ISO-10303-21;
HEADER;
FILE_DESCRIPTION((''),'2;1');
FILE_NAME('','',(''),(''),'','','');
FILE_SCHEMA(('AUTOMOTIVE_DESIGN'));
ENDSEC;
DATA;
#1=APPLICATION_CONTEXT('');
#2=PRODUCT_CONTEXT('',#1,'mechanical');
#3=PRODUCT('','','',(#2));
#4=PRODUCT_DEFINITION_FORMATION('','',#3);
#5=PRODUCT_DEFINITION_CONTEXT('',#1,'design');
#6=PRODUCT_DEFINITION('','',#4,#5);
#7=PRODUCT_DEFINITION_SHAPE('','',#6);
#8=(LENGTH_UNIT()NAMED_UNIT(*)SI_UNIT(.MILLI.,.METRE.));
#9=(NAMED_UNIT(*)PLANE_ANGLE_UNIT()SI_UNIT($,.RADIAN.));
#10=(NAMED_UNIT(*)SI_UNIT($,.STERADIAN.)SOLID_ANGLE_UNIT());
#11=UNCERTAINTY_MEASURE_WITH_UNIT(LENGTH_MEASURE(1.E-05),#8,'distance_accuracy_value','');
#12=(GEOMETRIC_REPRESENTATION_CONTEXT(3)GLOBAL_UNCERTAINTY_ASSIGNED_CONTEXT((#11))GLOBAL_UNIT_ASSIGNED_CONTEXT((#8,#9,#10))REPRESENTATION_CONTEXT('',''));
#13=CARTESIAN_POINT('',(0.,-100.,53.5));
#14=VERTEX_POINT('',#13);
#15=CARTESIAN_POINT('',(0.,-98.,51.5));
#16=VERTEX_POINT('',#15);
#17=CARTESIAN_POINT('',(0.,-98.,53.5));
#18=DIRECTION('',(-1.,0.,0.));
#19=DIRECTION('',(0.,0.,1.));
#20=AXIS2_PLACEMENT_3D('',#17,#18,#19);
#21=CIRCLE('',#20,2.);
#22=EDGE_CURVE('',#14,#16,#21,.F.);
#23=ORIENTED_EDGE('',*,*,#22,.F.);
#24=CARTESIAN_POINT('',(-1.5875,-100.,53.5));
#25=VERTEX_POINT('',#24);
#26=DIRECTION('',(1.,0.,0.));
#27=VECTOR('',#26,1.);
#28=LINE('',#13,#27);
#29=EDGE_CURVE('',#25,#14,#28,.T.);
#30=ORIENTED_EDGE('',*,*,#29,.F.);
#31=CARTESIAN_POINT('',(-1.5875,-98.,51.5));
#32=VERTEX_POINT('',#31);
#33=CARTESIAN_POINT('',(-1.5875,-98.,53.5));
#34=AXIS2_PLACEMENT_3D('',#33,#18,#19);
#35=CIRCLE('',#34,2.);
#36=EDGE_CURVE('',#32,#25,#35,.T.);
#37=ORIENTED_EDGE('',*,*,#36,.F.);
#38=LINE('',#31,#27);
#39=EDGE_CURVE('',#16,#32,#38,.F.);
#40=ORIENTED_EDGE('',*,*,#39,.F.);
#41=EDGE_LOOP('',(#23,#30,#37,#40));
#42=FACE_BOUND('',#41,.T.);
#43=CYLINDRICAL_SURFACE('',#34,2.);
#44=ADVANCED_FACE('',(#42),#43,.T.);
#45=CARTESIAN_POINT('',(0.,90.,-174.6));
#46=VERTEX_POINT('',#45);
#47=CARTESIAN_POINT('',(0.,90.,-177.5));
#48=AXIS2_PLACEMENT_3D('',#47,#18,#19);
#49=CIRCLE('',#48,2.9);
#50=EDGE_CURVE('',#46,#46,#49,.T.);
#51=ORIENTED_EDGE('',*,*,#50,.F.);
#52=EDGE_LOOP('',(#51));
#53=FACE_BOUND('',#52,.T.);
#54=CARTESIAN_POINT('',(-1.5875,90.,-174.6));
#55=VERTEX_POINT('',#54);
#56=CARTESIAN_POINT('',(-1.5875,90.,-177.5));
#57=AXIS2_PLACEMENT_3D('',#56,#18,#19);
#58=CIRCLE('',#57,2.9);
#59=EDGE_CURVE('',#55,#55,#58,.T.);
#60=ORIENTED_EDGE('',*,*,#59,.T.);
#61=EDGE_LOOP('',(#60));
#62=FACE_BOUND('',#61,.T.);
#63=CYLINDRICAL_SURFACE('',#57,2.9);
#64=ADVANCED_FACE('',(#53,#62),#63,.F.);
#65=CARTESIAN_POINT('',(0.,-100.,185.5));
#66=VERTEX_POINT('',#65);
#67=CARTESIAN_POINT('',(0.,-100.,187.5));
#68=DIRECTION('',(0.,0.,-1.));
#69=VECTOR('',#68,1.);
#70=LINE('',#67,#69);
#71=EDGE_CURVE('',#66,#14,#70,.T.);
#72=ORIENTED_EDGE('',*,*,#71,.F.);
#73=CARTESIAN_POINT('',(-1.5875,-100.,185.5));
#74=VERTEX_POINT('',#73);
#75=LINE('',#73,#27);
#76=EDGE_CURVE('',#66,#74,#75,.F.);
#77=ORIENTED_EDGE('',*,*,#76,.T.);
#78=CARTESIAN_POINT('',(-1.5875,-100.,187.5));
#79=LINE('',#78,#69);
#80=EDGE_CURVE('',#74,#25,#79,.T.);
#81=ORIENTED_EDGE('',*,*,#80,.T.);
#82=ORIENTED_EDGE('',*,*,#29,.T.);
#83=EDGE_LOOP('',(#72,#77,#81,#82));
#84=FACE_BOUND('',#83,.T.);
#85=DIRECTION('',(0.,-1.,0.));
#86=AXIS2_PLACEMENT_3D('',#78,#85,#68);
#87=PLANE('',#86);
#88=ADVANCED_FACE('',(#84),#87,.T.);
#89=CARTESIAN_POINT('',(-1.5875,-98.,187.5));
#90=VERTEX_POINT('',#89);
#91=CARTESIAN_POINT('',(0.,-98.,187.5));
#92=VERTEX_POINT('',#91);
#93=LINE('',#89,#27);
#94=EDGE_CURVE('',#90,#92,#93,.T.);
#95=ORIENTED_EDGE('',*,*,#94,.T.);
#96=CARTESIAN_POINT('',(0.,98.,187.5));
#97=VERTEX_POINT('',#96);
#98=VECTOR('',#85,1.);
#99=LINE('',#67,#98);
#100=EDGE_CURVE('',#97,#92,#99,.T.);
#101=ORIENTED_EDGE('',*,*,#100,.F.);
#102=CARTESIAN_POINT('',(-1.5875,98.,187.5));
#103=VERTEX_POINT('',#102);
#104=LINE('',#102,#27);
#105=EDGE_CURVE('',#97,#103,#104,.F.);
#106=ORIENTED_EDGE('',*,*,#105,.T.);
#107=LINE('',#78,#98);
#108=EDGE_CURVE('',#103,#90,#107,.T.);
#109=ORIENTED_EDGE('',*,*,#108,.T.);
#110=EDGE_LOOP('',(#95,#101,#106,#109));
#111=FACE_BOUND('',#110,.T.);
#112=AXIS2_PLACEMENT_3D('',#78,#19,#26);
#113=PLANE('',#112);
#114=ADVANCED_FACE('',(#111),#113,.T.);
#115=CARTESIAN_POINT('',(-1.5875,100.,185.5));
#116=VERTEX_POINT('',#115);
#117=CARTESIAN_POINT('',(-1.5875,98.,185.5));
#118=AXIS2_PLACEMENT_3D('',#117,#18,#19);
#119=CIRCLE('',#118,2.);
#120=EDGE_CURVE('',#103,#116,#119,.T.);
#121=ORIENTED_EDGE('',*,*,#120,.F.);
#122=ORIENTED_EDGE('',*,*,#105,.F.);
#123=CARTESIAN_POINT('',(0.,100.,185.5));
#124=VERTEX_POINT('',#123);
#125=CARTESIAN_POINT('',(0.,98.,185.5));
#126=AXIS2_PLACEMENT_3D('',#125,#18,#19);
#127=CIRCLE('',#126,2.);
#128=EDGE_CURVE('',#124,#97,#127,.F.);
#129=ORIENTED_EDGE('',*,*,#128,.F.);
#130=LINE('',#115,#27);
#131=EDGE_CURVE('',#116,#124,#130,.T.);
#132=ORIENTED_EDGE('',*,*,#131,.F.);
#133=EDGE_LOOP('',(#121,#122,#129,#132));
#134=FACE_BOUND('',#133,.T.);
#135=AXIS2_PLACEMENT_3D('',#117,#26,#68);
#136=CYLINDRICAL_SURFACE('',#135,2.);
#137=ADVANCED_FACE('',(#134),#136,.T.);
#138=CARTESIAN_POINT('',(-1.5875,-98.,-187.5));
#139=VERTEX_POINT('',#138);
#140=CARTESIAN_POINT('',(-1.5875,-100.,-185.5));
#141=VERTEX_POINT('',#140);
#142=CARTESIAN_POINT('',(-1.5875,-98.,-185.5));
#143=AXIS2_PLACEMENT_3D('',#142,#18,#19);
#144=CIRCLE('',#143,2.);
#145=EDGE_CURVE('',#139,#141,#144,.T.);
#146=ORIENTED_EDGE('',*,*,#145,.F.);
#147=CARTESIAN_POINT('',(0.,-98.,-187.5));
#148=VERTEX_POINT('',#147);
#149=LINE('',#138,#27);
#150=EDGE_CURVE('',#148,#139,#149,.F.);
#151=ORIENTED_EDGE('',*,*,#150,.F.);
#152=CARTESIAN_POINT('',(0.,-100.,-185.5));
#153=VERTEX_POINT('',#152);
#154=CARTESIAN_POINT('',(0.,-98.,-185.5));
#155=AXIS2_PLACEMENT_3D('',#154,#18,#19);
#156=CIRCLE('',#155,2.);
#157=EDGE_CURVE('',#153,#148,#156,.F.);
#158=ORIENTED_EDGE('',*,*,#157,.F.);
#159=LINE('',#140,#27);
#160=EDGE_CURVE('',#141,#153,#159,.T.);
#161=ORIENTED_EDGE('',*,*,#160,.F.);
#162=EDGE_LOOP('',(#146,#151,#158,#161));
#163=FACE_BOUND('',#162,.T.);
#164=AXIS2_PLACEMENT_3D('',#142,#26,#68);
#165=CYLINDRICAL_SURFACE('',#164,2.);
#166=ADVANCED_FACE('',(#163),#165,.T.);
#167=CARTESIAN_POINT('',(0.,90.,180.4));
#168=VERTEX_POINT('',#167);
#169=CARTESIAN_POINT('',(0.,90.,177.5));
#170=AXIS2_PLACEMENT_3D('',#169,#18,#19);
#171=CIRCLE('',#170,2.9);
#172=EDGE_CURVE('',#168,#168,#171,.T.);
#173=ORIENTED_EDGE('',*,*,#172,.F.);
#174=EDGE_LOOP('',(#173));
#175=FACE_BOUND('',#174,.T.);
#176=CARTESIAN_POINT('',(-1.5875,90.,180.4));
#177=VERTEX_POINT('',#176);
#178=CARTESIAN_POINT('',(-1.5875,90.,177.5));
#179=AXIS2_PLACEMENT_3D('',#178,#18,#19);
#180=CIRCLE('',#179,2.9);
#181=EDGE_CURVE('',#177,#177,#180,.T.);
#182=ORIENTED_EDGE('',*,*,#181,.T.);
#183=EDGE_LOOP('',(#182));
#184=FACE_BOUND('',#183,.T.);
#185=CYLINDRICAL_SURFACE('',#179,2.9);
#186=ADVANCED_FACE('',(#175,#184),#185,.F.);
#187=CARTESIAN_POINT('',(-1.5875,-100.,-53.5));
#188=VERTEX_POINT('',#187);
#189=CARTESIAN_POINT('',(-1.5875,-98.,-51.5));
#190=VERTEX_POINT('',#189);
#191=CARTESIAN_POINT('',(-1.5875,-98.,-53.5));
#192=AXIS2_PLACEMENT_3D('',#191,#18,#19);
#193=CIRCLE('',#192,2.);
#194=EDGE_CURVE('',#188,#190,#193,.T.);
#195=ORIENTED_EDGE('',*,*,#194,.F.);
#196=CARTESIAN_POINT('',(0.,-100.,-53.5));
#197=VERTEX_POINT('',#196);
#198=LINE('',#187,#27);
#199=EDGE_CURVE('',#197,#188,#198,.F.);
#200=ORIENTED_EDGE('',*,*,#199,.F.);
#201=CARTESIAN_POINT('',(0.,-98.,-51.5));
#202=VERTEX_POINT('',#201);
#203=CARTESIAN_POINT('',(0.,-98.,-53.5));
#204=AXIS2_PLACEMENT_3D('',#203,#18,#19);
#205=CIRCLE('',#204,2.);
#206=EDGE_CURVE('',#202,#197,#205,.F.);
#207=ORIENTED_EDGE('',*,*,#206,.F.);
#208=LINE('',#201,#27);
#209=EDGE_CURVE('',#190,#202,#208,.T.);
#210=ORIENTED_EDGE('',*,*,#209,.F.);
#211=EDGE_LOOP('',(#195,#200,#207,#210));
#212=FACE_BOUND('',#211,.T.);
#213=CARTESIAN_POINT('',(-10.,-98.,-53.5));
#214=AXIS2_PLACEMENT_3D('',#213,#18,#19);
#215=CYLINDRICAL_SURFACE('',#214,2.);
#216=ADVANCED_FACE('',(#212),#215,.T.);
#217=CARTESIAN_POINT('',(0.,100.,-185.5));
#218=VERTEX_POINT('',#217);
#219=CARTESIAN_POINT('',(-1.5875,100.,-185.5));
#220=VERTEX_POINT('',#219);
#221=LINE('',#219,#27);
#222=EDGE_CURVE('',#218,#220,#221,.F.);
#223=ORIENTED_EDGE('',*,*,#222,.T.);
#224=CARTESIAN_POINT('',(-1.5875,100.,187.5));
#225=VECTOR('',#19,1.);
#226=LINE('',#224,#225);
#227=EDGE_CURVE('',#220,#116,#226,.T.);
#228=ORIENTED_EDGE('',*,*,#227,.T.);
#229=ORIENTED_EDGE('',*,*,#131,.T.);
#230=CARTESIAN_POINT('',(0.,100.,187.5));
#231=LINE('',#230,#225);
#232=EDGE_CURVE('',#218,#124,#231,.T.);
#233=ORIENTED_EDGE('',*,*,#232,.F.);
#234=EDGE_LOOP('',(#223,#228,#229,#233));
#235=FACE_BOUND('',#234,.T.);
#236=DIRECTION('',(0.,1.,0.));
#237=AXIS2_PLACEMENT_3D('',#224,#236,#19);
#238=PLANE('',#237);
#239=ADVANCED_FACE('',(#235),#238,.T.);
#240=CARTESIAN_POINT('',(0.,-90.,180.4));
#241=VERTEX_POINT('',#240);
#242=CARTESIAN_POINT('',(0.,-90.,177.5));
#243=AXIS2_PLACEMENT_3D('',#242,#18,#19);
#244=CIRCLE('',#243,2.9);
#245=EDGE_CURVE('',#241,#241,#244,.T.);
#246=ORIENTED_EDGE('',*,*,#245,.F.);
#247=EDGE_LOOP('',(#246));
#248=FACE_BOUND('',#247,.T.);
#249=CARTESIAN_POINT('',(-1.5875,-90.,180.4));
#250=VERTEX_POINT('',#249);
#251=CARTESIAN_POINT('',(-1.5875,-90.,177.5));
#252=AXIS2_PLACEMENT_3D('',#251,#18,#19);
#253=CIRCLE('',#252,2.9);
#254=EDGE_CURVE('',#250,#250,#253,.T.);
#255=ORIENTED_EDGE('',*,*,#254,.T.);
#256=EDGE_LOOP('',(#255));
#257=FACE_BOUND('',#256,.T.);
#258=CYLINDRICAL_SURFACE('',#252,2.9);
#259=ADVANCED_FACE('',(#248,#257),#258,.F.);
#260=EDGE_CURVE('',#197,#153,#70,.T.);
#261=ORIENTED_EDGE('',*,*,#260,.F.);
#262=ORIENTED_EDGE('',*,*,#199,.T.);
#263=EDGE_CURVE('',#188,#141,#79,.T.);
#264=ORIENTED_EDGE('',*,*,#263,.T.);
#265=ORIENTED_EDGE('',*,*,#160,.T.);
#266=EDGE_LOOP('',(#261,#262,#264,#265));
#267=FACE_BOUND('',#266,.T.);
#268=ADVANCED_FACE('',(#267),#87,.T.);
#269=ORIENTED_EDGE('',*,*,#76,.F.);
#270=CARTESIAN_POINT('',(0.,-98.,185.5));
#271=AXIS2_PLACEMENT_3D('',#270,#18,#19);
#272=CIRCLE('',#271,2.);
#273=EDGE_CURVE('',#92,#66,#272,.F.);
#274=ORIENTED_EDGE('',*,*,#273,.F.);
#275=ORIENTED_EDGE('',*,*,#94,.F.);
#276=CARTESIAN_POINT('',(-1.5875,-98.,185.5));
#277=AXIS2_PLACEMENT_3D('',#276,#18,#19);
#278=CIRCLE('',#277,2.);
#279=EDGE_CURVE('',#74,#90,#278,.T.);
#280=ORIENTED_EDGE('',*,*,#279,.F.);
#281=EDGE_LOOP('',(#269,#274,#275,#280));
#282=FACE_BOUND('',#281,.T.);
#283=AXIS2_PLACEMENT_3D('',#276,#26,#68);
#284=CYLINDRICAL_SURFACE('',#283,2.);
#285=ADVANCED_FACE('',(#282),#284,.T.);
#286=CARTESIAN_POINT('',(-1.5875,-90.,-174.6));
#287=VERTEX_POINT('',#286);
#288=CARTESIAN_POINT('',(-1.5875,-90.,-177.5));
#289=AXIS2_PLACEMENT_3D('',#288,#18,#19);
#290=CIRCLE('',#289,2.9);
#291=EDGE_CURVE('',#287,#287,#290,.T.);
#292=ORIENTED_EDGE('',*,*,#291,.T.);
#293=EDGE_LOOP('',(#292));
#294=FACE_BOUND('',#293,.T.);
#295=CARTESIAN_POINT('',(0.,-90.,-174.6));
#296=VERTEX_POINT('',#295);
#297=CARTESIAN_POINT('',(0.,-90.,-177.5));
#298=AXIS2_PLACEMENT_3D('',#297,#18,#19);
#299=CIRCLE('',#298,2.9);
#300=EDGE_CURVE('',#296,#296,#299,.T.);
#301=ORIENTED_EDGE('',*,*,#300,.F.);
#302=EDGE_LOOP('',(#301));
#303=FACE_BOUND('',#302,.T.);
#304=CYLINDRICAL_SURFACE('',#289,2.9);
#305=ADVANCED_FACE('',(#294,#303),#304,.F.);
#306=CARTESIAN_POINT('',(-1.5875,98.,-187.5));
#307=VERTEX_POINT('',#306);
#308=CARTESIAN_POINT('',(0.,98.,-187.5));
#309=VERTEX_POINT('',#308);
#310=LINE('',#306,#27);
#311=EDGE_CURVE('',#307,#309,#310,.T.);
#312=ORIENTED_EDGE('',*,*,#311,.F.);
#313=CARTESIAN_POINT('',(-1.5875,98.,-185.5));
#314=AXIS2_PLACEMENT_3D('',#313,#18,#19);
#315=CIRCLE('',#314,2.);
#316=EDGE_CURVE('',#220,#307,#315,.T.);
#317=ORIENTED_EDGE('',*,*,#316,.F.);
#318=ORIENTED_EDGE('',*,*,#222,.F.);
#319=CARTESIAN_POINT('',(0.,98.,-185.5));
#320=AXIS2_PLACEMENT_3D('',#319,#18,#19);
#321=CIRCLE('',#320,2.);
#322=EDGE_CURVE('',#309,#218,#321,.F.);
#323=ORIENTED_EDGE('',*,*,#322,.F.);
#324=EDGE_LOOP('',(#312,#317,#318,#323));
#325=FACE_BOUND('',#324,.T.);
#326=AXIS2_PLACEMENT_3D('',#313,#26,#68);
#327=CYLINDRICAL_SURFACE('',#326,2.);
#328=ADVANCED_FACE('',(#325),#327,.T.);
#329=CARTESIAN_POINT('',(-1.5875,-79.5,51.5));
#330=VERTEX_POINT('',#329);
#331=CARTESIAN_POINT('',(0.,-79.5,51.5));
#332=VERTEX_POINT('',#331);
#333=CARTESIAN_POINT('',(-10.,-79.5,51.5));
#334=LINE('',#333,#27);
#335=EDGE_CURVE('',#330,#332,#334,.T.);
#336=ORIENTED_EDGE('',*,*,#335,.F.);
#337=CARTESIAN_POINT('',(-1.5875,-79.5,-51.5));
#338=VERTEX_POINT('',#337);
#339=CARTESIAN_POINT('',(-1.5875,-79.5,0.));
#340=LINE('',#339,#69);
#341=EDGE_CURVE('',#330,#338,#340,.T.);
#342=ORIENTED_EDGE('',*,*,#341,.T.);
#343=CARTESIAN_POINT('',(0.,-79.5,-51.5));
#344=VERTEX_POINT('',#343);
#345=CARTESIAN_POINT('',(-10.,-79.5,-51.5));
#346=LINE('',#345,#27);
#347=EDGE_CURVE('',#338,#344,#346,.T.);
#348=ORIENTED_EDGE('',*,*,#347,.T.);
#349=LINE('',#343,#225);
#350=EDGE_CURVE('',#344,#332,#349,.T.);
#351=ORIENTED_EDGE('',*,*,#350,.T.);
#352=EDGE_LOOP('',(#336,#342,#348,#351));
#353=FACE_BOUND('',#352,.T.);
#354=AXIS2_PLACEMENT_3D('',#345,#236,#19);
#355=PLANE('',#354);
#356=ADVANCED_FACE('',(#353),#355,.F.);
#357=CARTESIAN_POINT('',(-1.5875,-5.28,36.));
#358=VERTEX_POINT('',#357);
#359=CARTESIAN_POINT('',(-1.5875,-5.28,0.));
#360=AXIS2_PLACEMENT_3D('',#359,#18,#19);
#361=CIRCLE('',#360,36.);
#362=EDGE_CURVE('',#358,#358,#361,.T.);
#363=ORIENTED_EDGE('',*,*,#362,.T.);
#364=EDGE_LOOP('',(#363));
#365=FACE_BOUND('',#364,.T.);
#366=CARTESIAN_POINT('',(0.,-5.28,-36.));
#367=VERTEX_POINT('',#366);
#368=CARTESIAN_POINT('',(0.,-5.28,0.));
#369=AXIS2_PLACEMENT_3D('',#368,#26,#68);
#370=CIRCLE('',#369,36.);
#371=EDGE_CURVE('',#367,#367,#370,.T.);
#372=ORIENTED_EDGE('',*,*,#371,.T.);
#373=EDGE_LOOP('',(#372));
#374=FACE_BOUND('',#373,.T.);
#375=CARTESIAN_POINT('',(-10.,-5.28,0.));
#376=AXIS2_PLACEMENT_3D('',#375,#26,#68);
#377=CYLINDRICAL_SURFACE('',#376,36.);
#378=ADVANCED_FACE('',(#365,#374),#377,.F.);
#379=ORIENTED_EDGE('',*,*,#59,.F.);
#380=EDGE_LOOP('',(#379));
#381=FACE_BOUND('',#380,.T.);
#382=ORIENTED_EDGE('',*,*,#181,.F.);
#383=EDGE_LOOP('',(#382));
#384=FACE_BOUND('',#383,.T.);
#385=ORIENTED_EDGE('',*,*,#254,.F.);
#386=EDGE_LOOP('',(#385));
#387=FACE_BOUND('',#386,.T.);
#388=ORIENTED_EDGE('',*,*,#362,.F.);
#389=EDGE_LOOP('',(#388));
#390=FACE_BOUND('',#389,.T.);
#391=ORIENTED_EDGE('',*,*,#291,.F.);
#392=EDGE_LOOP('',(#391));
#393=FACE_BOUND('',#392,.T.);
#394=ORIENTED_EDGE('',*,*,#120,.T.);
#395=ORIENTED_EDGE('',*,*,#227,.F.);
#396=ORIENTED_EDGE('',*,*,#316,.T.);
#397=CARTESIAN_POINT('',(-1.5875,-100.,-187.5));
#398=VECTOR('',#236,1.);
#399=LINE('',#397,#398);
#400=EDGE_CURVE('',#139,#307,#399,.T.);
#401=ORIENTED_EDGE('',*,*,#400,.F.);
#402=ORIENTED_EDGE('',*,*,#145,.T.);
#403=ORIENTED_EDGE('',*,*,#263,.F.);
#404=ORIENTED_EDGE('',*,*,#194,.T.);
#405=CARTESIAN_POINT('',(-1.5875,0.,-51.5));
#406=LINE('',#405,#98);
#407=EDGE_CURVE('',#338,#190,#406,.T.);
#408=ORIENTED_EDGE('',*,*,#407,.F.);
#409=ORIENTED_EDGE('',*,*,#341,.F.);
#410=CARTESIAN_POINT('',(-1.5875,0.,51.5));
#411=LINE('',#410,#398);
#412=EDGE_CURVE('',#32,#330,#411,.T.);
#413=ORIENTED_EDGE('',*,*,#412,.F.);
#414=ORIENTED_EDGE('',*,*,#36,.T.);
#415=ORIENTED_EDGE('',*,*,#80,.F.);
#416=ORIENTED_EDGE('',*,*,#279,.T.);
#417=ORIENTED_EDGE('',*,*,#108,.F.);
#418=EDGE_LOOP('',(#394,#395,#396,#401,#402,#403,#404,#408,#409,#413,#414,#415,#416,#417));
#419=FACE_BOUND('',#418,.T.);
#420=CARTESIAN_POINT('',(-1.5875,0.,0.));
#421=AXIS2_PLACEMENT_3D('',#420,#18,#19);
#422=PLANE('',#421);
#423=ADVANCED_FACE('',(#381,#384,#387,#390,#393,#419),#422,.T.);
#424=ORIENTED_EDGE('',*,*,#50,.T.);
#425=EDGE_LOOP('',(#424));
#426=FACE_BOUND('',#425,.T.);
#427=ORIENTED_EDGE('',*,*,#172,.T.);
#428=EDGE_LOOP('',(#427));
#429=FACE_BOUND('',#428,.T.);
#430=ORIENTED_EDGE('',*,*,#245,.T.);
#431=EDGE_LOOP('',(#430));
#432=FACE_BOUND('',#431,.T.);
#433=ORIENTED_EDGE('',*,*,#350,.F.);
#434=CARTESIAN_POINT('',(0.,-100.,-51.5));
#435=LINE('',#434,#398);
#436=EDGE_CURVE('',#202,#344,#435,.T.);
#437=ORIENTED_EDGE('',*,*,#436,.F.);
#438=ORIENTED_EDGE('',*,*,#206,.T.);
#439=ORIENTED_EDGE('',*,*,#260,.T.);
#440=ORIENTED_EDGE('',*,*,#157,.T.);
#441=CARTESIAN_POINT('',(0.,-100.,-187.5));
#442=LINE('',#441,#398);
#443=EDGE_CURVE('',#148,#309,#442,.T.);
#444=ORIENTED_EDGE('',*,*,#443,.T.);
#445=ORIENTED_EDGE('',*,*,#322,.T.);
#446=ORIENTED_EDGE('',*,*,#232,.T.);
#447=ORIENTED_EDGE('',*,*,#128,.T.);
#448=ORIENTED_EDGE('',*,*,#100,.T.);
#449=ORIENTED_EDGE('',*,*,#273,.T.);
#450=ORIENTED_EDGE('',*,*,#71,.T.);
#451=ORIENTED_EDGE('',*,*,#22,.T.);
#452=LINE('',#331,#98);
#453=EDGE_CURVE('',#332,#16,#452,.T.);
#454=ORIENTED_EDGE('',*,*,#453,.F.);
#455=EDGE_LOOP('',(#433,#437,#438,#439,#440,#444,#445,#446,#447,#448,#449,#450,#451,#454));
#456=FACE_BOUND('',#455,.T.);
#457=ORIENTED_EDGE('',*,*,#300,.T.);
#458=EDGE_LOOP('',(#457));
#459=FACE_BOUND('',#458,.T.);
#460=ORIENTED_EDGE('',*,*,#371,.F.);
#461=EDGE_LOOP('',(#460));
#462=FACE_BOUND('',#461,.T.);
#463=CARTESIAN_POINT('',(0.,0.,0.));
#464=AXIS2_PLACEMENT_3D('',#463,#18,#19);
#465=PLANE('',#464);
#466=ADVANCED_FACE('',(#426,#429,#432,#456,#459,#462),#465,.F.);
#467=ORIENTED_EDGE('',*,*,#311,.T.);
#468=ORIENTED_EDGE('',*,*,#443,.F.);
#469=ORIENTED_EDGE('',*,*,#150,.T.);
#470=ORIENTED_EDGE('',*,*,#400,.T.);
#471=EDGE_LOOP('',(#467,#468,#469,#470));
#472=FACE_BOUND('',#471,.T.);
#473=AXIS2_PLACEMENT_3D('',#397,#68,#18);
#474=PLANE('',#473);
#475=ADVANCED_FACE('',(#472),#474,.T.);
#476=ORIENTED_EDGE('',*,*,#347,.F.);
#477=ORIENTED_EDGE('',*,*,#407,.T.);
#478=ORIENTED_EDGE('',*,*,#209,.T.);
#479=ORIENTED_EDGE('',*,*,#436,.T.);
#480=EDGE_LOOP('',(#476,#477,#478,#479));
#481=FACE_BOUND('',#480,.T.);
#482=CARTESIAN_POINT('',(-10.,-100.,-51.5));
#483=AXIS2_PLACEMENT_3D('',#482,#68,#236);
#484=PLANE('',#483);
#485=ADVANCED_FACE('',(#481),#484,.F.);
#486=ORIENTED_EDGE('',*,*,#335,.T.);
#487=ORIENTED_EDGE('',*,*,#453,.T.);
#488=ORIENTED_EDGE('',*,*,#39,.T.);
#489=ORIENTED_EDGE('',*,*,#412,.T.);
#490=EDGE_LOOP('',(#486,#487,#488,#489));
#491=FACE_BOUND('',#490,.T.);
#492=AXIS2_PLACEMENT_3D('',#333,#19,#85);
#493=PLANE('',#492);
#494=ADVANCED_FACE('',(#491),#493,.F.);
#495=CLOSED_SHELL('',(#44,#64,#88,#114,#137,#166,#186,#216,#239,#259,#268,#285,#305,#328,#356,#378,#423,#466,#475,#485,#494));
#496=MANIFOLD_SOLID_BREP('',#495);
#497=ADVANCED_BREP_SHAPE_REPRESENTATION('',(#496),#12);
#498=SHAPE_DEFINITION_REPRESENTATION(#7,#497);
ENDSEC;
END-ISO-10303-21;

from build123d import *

# Parameters (mm, degrees)
SKETCH1_W            = 375
SKETCH1_H            = 200
SKETCH1_R            = 20
BASE_FLANGE1_DEPTH   = 1.5875
M5_CLEARANCE_HOLE1_D = 5.8
MIRROR2_COPY_1_D     = 5.8
FILLET1_R            = 2
FILLET2_R            = 2
FILLET3_R            = 2
FILLET4_R            = 2
SKETCH9_W            = 103
SKETCH9_H            = 20.5
CUT_EXTRUDE1_DEPTH   = 10
FILLET5_R            = 2
FILLET6_R            = 2
SKETCH10_R           = 20
BOSS_EXTRUDE1_DEPTH  = 1.5875
SKETCH11_R           = 36
CUT_EXTRUDE2_DEPTH   = 10


# Sheet-metal steps are written as plain solids
with BuildPart() as part:
    # Sketch1 → Base-Flange1 (new body)
    with BuildSketch(Plane(origin=(0, 0, 0), x_dir=(0, 0, -1), z_dir=(1, 0, 0))):
        Rectangle(SKETCH1_W, SKETCH1_H)
        Circle(SKETCH1_R, mode=Mode.SUBTRACT)
    extrude(amount=-BASE_FLANGE1_DEPTH)

    # M5 Clearance Hole1 (through all)
    with Locations(Plane.ZY.offset(1.5875)):
        with Locations((177.5, 90)):
            m5_clearance_hole1 = Hole(M5_CLEARANCE_HOLE1_D / 2)

    # Mirror1: M5 Clearance Hole1 across plane
    add(m5_clearance_hole1.mirror(Plane.XY), mode=Mode.SUBTRACT)

    # Mirror2: M5 Clearance Hole1 across plane
    add(m5_clearance_hole1.mirror(Plane.ZX), mode=Mode.SUBTRACT)

    # Mirror2 copy 1 (through all)
    with Locations(Plane(origin=(-1.5875, 0, 0), x_dir=(0, 0, -1), z_dir=(-1, 0, 0))):
        with Locations((177.5, 90)):
            Hole(MIRROR2_COPY_1_D / 2)

    # Fillet1
    fillet1_edges = [part.edges().sort_by_distance(p)[0] for p in [
        (-0.79375, -100, -187.5),
    ]]
    fillet(fillet1_edges, radius=FILLET1_R)

    # Fillet2
    fillet2_edges = [part.edges().sort_by_distance(p)[0] for p in [
        (-0.79375, 100, -187.5),
    ]]
    fillet(fillet2_edges, radius=FILLET2_R)

    # Fillet3
    fillet3_edges = [part.edges().sort_by_distance(p)[0] for p in [
        (-0.79375, 100, 187.5),
    ]]
    fillet(fillet3_edges, radius=FILLET3_R)

    # Fillet4
    fillet4_edges = [part.edges().sort_by_distance(p)[0] for p in [
        (-0.79375, -100, 187.5),
    ]]
    fillet(fillet4_edges, radius=FILLET4_R)

    # Sketch9 → Cut-Extrude1 (cut)
    with BuildSketch(Plane(origin=(0, 0, 0), x_dir=(0, 0, -1), z_dir=(1, 0, 0))):
        with Locations((0, -89.75)):
            Rectangle(SKETCH9_W, SKETCH9_H)
    extrude(amount=-CUT_EXTRUDE1_DEPTH, mode=Mode.SUBTRACT)

    # Fillet5
    fillet5_edges = [part.edges().sort_by_distance(p)[0] for p in [
        (-0.79375, -100, -51.5),
    ]]
    fillet(fillet5_edges, radius=FILLET5_R)

    # Fillet6
    fillet6_edges = [part.edges().sort_by_distance(p)[0] for p in [
        (-0.79375, -100, 51.5),
    ]]
    fillet(fillet6_edges, radius=FILLET6_R)

    # Sketch10 → Boss-Extrude1 (add)
    with BuildSketch(Plane(origin=(0, 0, 0), x_dir=(0, 0, -1), z_dir=(1, 0, 0))):
        Circle(SKETCH10_R)
    extrude(amount=-BOSS_EXTRUDE1_DEPTH)

    # Sketch11 → Cut-Extrude2 (cut)
    with BuildSketch(Plane(origin=(0, 0, 0), x_dir=(0, 0, -1), z_dir=(1, 0, 0))):
        with Locations((0, -5.28)):
            Circle(SKETCH11_R)
    extrude(amount=-CUT_EXTRUDE2_DEPTH, mode=Mode.SUBTRACT)


solid = part.part
